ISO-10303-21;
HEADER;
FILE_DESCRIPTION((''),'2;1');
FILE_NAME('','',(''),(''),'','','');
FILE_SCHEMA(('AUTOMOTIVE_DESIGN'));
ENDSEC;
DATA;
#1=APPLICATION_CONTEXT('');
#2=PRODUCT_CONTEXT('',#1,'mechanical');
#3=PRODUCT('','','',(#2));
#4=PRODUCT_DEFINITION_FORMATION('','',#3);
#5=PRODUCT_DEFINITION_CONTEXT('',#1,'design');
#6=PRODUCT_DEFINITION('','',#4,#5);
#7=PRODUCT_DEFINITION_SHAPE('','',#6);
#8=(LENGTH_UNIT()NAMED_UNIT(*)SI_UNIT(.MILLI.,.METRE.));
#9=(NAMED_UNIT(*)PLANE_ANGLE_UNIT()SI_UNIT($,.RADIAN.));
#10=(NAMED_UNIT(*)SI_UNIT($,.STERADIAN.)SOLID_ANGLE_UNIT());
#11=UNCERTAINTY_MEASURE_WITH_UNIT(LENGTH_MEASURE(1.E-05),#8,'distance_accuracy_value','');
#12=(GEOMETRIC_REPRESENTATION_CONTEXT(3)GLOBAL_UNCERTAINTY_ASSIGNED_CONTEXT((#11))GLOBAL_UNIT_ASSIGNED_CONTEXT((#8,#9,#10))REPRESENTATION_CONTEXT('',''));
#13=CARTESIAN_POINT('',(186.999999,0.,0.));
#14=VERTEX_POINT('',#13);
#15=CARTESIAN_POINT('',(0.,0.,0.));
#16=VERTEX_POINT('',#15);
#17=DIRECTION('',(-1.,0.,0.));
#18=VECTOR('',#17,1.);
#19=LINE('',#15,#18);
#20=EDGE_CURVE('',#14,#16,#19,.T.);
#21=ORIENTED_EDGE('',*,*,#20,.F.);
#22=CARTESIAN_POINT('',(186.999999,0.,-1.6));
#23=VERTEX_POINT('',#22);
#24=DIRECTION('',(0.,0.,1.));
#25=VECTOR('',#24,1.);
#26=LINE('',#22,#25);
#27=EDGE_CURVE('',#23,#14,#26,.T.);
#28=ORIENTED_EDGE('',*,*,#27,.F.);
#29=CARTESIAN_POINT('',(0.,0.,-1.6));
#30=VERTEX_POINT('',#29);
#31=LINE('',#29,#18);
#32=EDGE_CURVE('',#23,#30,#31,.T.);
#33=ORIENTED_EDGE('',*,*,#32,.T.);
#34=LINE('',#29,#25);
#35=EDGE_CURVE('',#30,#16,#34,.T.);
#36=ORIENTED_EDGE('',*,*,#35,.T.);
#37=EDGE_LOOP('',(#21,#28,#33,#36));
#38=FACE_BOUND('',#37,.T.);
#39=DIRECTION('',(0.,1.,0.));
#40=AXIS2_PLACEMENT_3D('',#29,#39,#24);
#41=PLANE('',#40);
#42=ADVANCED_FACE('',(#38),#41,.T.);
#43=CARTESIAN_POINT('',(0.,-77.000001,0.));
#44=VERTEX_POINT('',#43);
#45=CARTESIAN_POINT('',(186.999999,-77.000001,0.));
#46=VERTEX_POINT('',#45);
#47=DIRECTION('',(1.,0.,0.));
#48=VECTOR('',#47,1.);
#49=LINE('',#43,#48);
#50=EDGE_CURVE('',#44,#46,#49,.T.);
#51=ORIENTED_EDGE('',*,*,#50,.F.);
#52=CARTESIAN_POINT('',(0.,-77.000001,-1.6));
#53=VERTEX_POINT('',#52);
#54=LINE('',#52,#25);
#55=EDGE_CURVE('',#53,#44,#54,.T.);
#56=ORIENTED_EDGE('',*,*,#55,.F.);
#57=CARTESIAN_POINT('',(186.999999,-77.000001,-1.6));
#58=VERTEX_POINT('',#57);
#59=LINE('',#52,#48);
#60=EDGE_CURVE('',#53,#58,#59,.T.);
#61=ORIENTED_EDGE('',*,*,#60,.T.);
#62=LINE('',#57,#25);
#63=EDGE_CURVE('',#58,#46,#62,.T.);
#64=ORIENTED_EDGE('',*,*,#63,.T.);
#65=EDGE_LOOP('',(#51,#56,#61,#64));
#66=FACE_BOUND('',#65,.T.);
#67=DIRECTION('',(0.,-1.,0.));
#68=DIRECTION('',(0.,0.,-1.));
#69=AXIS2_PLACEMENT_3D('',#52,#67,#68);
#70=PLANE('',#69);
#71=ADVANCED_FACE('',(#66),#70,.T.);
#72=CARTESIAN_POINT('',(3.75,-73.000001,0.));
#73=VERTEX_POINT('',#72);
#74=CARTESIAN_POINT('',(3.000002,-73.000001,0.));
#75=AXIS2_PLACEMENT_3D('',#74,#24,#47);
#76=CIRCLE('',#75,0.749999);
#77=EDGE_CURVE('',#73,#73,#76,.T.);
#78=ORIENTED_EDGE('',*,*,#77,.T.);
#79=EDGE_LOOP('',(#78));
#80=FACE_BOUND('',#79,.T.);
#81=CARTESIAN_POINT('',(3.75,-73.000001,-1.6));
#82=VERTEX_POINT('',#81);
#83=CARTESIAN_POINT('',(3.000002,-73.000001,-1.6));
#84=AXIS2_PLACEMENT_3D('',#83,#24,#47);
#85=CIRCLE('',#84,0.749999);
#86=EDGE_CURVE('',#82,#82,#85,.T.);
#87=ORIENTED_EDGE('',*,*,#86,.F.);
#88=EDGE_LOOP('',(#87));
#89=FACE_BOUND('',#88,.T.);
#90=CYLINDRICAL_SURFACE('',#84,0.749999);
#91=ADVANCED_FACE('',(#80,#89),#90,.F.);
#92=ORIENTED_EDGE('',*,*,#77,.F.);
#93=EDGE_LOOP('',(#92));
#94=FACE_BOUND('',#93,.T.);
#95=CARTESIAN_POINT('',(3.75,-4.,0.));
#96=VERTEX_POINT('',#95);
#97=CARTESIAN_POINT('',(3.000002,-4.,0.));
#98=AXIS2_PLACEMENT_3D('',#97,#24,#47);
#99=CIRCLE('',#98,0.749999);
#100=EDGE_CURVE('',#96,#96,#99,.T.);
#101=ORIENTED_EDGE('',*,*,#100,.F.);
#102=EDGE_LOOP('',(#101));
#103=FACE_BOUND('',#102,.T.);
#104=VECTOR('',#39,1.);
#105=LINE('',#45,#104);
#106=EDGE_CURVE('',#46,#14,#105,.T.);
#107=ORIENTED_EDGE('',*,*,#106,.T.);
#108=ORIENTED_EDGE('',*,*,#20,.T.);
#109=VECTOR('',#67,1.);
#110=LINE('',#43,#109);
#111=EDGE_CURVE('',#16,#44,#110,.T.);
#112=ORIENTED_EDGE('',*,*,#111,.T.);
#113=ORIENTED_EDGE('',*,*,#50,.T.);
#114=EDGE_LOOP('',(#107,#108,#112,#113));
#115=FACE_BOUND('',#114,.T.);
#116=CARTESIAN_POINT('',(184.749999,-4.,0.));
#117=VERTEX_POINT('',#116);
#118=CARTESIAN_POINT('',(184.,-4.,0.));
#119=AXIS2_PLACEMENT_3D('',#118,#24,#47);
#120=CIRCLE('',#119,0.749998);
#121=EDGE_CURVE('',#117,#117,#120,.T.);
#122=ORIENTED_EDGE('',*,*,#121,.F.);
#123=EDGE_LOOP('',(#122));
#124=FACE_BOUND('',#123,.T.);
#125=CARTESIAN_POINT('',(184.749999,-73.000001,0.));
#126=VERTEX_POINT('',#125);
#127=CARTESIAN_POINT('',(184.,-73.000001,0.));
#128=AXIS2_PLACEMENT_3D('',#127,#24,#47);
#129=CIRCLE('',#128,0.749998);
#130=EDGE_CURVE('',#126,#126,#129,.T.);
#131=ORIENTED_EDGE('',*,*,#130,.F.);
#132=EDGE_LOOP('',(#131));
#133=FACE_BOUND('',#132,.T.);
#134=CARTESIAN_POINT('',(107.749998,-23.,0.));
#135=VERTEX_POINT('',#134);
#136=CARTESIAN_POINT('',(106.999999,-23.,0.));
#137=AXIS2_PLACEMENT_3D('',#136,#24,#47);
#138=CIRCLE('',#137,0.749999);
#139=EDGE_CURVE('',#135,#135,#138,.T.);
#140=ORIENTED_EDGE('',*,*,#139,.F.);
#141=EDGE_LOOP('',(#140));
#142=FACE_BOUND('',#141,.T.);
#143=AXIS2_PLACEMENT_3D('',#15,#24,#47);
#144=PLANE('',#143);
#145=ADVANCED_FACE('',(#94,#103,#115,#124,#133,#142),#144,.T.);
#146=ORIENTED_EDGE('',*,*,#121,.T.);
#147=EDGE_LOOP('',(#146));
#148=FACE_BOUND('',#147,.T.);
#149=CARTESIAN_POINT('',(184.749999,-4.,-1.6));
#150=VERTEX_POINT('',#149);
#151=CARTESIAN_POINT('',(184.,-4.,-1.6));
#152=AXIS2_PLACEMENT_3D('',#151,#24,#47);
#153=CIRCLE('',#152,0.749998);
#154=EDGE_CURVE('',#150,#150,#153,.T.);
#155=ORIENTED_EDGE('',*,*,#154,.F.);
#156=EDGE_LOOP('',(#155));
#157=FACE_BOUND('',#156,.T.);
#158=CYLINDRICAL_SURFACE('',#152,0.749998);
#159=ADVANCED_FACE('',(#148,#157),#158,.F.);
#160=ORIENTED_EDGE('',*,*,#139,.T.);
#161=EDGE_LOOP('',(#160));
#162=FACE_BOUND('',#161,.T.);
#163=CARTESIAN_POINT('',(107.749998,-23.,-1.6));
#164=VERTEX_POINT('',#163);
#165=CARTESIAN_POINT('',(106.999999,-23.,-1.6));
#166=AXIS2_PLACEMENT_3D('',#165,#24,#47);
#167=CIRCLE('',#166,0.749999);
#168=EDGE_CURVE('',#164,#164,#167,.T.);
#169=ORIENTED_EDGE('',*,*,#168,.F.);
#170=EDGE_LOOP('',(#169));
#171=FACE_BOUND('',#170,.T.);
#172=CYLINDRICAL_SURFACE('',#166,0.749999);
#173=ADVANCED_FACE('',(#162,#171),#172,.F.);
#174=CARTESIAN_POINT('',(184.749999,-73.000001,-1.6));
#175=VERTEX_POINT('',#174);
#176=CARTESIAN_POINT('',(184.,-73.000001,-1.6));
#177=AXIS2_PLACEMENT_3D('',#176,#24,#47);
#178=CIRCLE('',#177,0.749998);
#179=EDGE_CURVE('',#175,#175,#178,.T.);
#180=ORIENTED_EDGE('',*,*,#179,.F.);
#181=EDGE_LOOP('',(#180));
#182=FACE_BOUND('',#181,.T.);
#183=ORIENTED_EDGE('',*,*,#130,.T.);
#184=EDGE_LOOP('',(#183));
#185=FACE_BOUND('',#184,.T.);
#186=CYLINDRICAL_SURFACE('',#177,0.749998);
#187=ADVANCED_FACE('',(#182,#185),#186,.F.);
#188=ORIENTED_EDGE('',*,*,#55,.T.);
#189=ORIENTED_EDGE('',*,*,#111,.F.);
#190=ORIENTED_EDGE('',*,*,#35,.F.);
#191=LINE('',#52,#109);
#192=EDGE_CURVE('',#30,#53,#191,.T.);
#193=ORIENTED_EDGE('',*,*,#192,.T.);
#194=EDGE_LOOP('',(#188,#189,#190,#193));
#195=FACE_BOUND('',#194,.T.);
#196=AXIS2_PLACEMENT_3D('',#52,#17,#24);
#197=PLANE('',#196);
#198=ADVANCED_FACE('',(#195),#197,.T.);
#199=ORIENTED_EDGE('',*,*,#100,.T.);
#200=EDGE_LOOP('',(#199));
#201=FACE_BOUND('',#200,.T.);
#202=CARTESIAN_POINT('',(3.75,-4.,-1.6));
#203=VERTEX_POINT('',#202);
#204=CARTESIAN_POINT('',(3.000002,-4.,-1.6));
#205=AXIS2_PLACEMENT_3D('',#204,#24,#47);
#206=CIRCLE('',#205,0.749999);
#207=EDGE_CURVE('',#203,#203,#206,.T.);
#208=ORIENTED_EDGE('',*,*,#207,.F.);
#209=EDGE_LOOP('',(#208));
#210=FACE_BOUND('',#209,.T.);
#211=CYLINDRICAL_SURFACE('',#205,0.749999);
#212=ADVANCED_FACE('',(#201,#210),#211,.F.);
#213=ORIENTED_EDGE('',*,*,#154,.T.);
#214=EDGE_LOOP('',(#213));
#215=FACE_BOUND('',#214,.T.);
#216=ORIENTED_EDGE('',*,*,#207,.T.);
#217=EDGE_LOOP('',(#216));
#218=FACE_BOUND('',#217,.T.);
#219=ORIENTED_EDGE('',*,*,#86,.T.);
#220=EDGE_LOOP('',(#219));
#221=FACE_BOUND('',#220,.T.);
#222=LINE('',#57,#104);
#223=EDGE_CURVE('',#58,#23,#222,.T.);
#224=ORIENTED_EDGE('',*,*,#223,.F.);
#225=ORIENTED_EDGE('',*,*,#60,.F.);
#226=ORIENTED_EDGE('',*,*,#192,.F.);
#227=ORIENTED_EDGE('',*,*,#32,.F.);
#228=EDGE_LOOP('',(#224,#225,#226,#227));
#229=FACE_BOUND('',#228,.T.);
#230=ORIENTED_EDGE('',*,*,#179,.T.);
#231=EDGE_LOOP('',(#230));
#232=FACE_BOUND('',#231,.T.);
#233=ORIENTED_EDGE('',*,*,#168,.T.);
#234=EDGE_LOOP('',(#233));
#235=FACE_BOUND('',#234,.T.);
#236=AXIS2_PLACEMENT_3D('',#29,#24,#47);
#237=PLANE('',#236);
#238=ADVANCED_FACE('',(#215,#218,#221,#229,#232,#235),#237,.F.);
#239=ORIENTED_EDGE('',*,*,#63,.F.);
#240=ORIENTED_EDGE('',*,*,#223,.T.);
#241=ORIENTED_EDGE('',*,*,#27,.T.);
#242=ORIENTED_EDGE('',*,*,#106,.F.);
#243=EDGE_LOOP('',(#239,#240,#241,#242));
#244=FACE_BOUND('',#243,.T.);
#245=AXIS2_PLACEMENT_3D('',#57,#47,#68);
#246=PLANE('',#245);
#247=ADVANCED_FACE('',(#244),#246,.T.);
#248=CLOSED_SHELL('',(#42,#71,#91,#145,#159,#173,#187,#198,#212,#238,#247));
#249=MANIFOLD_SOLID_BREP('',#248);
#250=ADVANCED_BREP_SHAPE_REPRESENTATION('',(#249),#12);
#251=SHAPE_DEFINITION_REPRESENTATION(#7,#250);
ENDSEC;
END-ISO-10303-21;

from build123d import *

# Parameters (mm, degrees)
KEEPOUTLAYER_W          = 186.99999938
KEEPOUTLAYER_H          = 77.00000094
EXTRUDE_1_DEPTH         = 1.6
CUT_EXTRUDE_START       = -1.6
CUT_EXTRUDE_1_OUTLINE_R = 0.7499985
CUT_EXTRUDE_1_DEPTH     = 1.6


# Read off the part's stored shape, not the designer's step: Вырез-Вытянуть1
with BuildPart() as part:
    # KeepOutLayer → Бобышка-Вытянуть1 (new body)
    with BuildSketch(Plane.XY):
        with Locations((93.49999969, -38.50000047)):
            Rectangle(KEEPOUTLAYER_W, KEEPOUTLAYER_H)
    extrude(amount=-EXTRUDE_1_DEPTH)

    # Вырез-Вытянуть1 outline → Вырез-Вытянуть1 (cut)
    with BuildSketch(Plane.XY.offset(CUT_EXTRUDE_START)):
        with Locations((184.0000003, -3.99999962)):
            Circle(CUT_EXTRUDE_1_OUTLINE_R)
        with Locations((106.99999936, -22.99999972)):
            Circle(CUT_EXTRUDE_1_OUTLINE_R)
        with Locations((3.00000162, -73.00000132)):
            Circle(CUT_EXTRUDE_1_OUTLINE_R)
        with Locations((3.00000162, -3.99999962)):
            Circle(CUT_EXTRUDE_1_OUTLINE_R)
        with Locations((184.0000003, -73.00000132)):
            Circle(CUT_EXTRUDE_1_OUTLINE_R)
    extrude(amount=CUT_EXTRUDE_1_DEPTH, mode=Mode.SUBTRACT)


solid = part.part
